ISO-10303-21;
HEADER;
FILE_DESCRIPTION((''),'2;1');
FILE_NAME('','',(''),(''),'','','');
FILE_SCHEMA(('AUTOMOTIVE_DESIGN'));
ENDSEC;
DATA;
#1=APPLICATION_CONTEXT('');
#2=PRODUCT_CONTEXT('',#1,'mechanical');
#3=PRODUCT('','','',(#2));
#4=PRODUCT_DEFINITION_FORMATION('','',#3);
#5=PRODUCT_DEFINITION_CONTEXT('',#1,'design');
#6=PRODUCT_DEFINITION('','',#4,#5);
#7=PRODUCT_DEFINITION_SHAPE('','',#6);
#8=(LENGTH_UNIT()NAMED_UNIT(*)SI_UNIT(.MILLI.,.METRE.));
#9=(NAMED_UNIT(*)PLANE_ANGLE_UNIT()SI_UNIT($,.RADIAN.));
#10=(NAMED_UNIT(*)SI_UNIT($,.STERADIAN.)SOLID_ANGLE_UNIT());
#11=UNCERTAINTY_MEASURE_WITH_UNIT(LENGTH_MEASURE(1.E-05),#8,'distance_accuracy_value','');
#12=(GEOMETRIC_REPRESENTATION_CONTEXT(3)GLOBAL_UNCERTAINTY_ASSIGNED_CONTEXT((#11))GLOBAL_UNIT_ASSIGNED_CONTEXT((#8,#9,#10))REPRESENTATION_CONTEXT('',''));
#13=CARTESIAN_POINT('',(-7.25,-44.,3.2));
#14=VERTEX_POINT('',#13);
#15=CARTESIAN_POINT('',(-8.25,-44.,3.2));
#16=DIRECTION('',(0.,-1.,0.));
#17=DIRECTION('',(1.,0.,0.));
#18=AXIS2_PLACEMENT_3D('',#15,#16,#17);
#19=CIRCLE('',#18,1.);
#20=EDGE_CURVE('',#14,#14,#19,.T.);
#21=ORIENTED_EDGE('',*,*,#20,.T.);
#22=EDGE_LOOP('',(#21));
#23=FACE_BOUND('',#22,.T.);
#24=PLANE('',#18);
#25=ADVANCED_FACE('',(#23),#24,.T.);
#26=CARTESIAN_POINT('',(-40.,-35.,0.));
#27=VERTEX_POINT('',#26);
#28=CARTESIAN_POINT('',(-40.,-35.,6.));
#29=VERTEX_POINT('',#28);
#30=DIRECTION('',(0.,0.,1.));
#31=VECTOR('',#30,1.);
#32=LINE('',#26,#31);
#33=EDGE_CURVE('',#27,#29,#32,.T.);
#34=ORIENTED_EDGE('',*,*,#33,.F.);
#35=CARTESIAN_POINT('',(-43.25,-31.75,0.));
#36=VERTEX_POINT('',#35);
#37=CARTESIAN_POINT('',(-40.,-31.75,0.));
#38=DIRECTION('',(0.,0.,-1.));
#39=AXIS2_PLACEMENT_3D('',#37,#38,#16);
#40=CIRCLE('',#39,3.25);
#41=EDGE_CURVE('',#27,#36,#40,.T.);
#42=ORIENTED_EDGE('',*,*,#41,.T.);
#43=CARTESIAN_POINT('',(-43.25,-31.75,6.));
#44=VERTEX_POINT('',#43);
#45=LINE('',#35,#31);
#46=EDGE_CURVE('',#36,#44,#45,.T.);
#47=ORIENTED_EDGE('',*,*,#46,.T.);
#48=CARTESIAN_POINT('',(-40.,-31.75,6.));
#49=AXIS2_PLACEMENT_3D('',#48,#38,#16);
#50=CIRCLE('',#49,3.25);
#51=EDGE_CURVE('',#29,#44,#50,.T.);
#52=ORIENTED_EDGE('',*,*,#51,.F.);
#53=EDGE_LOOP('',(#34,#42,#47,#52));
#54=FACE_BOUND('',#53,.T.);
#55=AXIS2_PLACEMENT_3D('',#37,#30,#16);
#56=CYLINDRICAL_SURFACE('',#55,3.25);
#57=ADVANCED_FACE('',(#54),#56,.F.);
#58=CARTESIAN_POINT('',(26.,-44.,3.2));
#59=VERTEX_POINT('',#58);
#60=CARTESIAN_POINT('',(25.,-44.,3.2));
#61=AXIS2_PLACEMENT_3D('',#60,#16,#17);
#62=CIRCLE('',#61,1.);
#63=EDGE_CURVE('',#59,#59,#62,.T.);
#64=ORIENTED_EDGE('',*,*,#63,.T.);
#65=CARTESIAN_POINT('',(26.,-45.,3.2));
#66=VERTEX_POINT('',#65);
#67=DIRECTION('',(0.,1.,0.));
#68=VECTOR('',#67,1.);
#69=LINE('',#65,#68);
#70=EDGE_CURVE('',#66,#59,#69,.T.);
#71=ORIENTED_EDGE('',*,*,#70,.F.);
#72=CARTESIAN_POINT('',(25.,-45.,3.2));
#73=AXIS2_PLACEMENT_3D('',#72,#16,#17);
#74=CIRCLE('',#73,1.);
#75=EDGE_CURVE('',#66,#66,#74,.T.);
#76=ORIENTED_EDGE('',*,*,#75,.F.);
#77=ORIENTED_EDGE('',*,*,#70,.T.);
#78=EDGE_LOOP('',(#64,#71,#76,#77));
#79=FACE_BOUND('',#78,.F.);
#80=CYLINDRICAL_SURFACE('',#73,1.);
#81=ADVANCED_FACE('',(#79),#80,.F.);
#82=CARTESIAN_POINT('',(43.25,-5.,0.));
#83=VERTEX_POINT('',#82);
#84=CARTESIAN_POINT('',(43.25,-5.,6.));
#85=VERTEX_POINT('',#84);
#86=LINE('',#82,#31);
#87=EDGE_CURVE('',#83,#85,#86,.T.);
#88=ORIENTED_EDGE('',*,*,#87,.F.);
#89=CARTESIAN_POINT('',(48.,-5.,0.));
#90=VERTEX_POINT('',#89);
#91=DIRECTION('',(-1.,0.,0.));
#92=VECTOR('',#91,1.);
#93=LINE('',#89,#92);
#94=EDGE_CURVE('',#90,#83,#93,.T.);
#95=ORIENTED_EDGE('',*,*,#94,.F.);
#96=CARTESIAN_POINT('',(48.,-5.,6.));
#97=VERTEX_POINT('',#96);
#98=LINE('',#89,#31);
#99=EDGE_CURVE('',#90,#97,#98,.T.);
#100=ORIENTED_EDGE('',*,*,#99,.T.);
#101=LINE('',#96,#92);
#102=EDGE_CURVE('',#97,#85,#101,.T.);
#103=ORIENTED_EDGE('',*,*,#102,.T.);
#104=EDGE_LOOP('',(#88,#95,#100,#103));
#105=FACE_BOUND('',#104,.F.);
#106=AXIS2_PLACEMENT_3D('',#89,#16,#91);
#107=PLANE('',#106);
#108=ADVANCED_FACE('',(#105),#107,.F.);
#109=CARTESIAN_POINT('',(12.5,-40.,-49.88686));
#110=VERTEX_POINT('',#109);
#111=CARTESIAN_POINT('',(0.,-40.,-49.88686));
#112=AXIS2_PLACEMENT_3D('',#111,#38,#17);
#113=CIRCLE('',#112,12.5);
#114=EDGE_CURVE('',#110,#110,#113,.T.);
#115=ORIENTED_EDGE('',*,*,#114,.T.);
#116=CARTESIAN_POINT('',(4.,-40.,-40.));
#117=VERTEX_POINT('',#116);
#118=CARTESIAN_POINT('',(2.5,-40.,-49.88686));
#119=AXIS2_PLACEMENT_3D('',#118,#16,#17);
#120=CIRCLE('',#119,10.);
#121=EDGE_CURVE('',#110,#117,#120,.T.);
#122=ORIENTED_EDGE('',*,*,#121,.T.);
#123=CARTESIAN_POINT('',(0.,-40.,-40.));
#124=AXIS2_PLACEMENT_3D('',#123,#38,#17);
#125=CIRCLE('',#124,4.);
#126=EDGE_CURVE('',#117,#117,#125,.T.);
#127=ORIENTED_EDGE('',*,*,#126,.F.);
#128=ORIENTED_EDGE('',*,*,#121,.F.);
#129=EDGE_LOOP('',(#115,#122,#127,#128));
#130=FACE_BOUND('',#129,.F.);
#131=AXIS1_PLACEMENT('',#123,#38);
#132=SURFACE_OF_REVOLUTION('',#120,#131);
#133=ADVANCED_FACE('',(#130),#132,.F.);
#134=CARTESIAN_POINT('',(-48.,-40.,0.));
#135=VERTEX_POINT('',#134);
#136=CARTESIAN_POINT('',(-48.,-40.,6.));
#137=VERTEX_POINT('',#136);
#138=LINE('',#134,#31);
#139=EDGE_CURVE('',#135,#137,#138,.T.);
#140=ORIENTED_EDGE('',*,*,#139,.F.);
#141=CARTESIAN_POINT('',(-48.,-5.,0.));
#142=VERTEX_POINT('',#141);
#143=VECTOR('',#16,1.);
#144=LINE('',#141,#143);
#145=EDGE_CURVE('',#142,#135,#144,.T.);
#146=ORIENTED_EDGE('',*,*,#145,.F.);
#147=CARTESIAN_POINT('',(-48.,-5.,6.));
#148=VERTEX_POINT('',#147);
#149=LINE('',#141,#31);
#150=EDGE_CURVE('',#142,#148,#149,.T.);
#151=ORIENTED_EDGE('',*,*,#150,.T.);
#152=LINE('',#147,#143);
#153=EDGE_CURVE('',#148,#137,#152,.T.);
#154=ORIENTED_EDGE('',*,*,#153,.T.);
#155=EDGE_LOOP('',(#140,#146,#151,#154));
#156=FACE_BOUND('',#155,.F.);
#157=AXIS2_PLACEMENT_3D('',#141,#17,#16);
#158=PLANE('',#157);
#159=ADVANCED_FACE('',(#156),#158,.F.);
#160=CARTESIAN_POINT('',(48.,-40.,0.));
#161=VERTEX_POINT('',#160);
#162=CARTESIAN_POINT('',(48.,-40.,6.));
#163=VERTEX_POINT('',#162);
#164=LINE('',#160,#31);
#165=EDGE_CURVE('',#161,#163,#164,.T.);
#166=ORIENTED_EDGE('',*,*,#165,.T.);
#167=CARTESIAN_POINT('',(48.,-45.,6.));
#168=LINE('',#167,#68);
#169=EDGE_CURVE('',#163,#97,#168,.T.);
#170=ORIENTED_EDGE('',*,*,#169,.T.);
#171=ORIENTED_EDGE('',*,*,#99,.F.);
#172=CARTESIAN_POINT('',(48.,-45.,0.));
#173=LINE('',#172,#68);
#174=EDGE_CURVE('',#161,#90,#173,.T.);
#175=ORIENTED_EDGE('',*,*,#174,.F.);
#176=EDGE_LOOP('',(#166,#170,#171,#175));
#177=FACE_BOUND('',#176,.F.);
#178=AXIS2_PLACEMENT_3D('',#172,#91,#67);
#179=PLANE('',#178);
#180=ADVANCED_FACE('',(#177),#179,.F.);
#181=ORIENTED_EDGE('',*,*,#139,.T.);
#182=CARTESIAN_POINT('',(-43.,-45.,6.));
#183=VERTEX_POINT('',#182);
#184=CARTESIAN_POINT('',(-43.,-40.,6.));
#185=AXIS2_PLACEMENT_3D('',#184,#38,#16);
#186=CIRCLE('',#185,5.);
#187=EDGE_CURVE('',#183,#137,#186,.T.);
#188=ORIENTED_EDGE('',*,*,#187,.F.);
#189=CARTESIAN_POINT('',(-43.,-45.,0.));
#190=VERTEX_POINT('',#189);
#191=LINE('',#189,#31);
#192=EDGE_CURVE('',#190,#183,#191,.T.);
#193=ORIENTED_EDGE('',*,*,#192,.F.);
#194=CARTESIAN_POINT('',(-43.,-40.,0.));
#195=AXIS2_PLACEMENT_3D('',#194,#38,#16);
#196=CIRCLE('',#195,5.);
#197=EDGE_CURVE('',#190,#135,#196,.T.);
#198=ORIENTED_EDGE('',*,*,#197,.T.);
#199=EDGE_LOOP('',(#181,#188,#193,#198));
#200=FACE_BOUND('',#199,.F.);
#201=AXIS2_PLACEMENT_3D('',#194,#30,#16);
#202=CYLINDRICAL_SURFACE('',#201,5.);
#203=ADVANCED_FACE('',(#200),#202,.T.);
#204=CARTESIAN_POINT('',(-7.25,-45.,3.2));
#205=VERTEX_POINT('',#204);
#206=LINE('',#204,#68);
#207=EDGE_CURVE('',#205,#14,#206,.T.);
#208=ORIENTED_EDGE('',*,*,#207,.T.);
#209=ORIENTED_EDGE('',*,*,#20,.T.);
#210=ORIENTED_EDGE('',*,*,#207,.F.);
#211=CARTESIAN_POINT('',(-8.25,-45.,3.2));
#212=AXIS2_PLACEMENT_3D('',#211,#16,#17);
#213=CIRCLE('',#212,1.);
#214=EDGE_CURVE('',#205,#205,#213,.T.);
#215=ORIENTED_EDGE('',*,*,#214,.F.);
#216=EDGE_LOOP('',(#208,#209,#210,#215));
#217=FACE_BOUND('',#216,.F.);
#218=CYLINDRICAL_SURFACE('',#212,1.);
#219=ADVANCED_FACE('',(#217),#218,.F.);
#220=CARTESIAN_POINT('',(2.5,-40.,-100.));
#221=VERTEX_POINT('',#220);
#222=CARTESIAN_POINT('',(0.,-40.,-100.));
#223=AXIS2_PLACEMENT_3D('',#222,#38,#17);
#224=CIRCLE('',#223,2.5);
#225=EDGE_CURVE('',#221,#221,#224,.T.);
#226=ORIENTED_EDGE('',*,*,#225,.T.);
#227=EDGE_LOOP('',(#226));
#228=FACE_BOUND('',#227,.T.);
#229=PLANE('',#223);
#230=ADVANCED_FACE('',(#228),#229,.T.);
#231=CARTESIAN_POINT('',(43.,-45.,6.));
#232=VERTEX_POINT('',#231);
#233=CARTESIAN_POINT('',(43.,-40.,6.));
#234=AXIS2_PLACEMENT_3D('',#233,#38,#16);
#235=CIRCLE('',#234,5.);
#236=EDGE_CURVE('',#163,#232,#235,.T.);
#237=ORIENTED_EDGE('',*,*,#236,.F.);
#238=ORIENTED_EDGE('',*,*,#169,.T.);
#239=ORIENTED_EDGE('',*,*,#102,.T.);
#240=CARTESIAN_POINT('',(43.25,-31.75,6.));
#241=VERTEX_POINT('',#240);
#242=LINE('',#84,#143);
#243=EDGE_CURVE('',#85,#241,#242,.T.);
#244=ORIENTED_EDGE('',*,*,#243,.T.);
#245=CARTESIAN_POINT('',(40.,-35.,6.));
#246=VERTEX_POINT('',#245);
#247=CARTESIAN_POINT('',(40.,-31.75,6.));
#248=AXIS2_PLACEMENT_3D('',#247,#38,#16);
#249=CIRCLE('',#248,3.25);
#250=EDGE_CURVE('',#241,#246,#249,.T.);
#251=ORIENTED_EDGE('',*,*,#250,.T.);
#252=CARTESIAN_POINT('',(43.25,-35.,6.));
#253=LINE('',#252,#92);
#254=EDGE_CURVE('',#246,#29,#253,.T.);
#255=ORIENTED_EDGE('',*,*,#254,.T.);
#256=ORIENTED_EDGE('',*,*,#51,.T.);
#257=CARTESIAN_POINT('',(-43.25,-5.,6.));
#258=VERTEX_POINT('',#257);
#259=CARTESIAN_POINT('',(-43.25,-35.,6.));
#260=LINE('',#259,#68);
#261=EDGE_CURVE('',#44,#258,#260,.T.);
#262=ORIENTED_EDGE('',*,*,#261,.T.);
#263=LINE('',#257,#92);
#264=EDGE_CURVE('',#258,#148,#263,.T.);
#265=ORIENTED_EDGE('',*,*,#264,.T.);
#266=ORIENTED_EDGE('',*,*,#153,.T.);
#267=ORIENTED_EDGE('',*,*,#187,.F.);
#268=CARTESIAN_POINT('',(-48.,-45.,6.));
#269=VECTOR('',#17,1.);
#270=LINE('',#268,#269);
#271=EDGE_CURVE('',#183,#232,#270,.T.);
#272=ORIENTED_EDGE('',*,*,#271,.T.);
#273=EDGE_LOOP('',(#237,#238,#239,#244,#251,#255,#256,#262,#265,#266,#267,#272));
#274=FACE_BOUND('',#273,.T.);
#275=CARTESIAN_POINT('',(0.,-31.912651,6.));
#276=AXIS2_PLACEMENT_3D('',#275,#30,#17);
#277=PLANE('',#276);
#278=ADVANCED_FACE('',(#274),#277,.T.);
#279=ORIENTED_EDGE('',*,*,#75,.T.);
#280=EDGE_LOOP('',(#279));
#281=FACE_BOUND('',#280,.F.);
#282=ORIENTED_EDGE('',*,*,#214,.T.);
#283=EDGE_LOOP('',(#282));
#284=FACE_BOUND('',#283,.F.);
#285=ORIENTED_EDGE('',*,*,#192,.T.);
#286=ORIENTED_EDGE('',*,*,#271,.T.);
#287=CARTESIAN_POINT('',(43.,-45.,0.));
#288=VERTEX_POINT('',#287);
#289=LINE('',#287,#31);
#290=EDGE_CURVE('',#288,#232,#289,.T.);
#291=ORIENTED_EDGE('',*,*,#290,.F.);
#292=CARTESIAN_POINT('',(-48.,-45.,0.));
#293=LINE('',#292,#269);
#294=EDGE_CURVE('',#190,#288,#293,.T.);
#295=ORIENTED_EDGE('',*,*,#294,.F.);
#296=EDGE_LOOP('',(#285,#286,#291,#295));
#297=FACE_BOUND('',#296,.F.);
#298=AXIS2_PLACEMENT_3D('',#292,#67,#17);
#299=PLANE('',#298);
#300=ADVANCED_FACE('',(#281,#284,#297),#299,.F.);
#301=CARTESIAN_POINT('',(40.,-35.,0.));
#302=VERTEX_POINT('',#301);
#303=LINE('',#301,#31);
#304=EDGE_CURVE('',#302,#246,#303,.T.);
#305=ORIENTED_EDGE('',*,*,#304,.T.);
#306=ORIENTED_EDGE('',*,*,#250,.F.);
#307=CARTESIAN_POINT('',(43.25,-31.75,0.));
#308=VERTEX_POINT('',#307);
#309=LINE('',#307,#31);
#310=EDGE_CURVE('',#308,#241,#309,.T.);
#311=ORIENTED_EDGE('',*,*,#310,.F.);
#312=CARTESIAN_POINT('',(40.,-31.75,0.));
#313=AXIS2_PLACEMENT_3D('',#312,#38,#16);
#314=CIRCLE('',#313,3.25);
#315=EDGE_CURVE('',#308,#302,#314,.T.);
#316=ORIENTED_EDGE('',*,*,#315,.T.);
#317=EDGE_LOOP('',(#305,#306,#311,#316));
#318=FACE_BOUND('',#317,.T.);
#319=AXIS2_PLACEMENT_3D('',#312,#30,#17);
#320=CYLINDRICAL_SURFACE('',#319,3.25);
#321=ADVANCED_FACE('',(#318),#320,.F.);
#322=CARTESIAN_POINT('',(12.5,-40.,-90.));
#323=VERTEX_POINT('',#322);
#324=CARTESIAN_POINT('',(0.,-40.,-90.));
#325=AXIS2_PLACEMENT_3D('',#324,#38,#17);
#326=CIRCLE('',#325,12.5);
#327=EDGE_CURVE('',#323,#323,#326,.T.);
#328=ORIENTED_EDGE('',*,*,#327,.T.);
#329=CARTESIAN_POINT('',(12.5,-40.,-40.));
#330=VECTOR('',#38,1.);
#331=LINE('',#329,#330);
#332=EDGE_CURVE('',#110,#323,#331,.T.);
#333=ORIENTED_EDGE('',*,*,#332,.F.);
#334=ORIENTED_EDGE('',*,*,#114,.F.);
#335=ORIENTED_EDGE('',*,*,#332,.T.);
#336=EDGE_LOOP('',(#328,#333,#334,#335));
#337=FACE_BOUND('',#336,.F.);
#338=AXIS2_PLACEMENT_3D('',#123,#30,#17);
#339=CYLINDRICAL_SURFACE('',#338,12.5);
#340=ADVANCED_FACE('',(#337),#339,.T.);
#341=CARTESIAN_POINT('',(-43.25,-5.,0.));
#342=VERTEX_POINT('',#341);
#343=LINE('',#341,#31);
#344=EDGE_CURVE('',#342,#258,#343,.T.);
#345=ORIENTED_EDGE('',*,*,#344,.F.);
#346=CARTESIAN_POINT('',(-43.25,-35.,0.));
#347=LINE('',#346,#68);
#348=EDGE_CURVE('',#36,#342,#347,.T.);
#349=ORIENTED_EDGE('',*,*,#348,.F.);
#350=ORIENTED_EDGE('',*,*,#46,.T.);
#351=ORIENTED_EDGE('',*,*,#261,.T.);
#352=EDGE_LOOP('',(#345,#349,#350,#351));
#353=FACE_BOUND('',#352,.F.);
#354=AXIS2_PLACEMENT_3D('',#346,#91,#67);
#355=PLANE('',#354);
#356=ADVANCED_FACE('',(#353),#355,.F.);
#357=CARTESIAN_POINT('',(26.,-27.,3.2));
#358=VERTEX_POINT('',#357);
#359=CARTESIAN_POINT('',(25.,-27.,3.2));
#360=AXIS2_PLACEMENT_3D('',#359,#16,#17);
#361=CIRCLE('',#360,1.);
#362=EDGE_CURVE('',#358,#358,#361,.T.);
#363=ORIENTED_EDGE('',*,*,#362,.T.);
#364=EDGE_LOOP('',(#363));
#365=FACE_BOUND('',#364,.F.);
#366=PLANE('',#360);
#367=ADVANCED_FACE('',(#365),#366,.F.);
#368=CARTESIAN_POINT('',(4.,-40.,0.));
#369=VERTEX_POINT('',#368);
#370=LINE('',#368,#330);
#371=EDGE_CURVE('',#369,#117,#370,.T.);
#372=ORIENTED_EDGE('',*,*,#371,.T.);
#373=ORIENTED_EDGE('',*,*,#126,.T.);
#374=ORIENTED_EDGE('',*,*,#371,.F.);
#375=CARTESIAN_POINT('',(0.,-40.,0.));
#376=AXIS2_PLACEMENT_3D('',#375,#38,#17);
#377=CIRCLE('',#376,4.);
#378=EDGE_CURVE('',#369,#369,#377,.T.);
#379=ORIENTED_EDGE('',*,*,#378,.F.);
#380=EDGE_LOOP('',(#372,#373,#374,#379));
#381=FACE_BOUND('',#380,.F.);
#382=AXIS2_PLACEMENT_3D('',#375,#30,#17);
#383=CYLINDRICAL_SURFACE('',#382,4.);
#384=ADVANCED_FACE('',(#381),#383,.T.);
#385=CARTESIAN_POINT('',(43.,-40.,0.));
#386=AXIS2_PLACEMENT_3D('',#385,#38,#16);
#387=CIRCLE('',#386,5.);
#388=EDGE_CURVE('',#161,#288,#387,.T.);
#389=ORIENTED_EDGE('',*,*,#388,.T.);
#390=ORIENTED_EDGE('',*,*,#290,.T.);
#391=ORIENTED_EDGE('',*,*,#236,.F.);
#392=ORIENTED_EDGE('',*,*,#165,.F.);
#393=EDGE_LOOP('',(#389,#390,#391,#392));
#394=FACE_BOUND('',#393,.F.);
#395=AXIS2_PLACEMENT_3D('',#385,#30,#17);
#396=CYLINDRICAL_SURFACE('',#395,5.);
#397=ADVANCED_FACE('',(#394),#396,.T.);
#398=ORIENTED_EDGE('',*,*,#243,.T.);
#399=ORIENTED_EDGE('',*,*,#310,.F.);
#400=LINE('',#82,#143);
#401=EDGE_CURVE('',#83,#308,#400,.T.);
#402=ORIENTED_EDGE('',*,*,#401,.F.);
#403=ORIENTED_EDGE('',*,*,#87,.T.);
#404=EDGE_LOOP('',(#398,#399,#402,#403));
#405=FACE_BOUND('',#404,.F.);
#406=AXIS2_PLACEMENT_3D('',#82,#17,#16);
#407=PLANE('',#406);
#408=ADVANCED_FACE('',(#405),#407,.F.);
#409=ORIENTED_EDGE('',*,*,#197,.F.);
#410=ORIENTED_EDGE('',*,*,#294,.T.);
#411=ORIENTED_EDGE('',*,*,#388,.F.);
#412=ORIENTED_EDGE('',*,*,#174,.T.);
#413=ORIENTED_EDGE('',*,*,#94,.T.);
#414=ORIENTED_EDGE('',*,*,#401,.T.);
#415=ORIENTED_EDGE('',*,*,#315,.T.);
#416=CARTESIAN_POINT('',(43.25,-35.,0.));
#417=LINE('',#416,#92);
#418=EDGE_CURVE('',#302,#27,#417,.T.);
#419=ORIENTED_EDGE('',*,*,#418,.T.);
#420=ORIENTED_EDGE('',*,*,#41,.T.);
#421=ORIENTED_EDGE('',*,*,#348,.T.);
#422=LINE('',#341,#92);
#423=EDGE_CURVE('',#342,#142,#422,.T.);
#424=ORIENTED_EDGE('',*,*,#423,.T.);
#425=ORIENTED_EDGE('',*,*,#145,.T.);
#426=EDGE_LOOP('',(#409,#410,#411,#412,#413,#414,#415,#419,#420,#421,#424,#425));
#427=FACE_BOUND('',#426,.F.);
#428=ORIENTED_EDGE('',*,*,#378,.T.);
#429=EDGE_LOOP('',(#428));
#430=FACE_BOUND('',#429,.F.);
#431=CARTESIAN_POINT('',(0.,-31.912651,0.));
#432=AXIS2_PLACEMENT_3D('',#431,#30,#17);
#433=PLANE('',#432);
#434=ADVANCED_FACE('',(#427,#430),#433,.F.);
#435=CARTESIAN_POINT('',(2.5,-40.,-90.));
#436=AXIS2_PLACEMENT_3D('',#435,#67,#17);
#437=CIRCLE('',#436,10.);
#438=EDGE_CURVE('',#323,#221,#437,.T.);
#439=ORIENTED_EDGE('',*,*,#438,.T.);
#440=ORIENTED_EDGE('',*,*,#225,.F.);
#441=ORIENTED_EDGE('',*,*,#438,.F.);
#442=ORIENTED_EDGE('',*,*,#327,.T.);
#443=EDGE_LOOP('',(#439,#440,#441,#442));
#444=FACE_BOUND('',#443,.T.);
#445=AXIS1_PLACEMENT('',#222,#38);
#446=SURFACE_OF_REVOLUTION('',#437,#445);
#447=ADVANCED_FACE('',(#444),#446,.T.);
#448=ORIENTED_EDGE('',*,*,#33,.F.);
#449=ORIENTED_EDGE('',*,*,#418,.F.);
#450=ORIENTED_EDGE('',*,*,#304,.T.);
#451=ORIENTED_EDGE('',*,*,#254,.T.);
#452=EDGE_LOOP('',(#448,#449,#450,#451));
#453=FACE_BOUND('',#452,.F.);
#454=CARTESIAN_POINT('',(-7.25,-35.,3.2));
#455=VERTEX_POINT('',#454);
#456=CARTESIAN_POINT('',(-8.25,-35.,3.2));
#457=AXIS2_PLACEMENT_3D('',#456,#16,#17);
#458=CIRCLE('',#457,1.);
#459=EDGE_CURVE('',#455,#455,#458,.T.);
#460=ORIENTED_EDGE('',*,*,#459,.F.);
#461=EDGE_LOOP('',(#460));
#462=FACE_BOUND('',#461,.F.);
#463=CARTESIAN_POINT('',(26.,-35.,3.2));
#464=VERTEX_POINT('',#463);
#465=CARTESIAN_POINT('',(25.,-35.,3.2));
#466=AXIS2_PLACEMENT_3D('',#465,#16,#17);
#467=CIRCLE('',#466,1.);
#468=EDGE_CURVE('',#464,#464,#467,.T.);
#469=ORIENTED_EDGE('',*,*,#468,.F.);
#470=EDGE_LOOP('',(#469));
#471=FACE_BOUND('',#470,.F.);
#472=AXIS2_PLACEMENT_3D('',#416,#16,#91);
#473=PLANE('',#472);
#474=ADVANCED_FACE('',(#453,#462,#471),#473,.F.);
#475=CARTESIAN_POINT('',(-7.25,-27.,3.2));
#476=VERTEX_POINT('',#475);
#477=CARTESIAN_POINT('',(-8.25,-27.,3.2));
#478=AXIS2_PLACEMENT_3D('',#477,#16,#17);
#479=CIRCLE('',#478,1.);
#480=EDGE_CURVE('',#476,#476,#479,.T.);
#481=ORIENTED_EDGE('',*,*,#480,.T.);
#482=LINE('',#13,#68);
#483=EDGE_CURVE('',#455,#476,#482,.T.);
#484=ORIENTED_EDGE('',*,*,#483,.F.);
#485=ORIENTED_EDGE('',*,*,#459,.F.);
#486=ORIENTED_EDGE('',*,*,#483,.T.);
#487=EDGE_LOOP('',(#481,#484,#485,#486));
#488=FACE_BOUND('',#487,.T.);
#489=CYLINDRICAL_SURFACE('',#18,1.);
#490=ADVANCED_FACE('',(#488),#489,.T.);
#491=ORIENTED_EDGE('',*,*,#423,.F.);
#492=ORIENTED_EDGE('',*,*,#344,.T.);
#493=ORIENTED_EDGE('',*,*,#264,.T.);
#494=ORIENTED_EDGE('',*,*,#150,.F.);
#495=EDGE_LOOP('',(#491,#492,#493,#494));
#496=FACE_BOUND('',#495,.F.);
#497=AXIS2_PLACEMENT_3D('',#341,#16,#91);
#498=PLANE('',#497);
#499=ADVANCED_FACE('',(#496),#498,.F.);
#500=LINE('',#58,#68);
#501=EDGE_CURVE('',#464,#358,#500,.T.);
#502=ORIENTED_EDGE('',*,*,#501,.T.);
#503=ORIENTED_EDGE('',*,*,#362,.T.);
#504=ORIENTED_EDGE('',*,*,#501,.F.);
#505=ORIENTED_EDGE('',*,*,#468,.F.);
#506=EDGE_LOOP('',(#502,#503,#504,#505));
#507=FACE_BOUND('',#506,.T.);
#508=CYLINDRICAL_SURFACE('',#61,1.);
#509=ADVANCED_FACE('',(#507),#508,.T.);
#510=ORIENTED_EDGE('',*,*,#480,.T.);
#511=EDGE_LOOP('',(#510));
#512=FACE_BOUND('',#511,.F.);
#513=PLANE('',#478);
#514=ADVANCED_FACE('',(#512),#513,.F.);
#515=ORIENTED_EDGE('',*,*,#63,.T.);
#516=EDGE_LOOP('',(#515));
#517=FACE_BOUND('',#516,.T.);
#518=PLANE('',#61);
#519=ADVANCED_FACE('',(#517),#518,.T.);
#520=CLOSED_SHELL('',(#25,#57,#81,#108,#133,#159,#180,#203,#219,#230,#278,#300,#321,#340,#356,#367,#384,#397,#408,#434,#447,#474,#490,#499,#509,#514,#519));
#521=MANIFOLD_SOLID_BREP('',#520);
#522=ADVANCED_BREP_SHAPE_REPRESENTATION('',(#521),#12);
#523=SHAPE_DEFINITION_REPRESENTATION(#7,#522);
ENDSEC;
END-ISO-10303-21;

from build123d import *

# Parameters (mm, degrees)
F1_DEPTH  = 6
F2_R      = 3.25
F3_R      = 5
F4_R      = 1
F5_DEPTH  = 10
F6_R      = 4
F7_DEPTH  = 40
F8_R      = 12.5
F8_R_2    = 4
F9_DEPTH  = 60
F12_R     = 1
F13_DEPTH = 17


# Not quite as in the source:
# - a fillet or chamfer that OpenCascade refuses, or shapes differently, is made with other operations: its cross-section is extruded or revolved along the edge and cut away or added


with BuildPart() as f1:
    # F0 (on Top) → F1 (new body)
    with BuildSketch(Plane.XY):
        Polygon((-48, -5), (-48, -45), (48, -45), (48, -5), (43.25, -5), (43.25, -35), (-43.25, -35), (-43.25, -5), align=None)
    extrude(amount=F1_DEPTH)

    # F2
    f2_edges = [f1.edges().sort_by_distance(p)[0] for p in [
        (-43.25, -35, 3),
        (43.25, -35, 3),
    ]]
    fillet(f2_edges, radius=F2_R)

    # F3
    f3_edges = [f1.edges().sort_by_distance(p)[0] for p in [
        (48, -45, 3),
        (-48, -45, 3),
    ]]
    fillet(f3_edges, radius=F3_R)

    # F4 (on face) → F5 (cut)
    with BuildSketch(Plane.XZ.offset(45)):
        with Locations((-8.25, 3.2)):
            Circle(F4_R)
        with Locations((25, 3.2)):
            Circle(F4_R)
    extrude(amount=-F5_DEPTH, mode=Mode.SUBTRACT)

    # F6 (on face) → F7 (join)
    with BuildSketch(Plane(origin=(0, 0, 0), x_dir=(1, 0, 0), z_dir=(0, 0, -1))):
        with Locations((0, 40)):
            Circle(F6_R)
    extrude(amount=F7_DEPTH)

    # F8 (on face) → F9 (join)
    with BuildSketch(Plane(origin=(0, 0, -40), x_dir=(1, 0, 0), z_dir=(0, 0, -1))):
        with Locations((0, 40)):
            Circle(F8_R)
        with Locations((0, 40)):
            Circle(F8_R_2, mode=Mode.SUBTRACT)
        with Locations((0, 40)):
            Circle(F8_R_2)
    extrude(amount=F9_DEPTH)

    # F10: fillet of radius 10 on 2 edges, made by hand

    # F10_s1 → F10_t2 (revolve, cut)
    with BuildSketch(Plane.XZ.offset(40)):
        with BuildLine():
            ThreePointArc((12.5, -90), (9.5710678119, -97.0710678119), (2.5, -100))
            Line((2.5, -100), (12.5, -100))
            Line((12.5, -100), (12.5, -90))
        make_face()
    revolve(axis=Axis((0, -40, -100), (0, 0, -1)), mode=Mode.SUBTRACT)

    # F10_s3 → F10_t4 (revolve, cut)
    with BuildSketch(Plane.XZ.offset(40)):
        with BuildLine():
            ThreePointArc((12.5, -49.8868599666), (10.0828754441, -43.3676575614), (4, -40))
            Line((4, -40), (12.5, -40))
            Line((12.5, -40), (12.5, -49.8868599666))
        make_face()
    revolve(axis=Axis((0, -40, -40), (0, 0, -1)), mode=Mode.SUBTRACT)

    # F12 (on offset) → F13 (join)
    with BuildSketch(Plane.XZ.offset(44)):
        with Locations((-8.25, 3.2)):
            Circle(F12_R)
        with Locations((25, 3.2)):
            Circle(F12_R)
    extrude(amount=-F13_DEPTH)


solid = f1.part
